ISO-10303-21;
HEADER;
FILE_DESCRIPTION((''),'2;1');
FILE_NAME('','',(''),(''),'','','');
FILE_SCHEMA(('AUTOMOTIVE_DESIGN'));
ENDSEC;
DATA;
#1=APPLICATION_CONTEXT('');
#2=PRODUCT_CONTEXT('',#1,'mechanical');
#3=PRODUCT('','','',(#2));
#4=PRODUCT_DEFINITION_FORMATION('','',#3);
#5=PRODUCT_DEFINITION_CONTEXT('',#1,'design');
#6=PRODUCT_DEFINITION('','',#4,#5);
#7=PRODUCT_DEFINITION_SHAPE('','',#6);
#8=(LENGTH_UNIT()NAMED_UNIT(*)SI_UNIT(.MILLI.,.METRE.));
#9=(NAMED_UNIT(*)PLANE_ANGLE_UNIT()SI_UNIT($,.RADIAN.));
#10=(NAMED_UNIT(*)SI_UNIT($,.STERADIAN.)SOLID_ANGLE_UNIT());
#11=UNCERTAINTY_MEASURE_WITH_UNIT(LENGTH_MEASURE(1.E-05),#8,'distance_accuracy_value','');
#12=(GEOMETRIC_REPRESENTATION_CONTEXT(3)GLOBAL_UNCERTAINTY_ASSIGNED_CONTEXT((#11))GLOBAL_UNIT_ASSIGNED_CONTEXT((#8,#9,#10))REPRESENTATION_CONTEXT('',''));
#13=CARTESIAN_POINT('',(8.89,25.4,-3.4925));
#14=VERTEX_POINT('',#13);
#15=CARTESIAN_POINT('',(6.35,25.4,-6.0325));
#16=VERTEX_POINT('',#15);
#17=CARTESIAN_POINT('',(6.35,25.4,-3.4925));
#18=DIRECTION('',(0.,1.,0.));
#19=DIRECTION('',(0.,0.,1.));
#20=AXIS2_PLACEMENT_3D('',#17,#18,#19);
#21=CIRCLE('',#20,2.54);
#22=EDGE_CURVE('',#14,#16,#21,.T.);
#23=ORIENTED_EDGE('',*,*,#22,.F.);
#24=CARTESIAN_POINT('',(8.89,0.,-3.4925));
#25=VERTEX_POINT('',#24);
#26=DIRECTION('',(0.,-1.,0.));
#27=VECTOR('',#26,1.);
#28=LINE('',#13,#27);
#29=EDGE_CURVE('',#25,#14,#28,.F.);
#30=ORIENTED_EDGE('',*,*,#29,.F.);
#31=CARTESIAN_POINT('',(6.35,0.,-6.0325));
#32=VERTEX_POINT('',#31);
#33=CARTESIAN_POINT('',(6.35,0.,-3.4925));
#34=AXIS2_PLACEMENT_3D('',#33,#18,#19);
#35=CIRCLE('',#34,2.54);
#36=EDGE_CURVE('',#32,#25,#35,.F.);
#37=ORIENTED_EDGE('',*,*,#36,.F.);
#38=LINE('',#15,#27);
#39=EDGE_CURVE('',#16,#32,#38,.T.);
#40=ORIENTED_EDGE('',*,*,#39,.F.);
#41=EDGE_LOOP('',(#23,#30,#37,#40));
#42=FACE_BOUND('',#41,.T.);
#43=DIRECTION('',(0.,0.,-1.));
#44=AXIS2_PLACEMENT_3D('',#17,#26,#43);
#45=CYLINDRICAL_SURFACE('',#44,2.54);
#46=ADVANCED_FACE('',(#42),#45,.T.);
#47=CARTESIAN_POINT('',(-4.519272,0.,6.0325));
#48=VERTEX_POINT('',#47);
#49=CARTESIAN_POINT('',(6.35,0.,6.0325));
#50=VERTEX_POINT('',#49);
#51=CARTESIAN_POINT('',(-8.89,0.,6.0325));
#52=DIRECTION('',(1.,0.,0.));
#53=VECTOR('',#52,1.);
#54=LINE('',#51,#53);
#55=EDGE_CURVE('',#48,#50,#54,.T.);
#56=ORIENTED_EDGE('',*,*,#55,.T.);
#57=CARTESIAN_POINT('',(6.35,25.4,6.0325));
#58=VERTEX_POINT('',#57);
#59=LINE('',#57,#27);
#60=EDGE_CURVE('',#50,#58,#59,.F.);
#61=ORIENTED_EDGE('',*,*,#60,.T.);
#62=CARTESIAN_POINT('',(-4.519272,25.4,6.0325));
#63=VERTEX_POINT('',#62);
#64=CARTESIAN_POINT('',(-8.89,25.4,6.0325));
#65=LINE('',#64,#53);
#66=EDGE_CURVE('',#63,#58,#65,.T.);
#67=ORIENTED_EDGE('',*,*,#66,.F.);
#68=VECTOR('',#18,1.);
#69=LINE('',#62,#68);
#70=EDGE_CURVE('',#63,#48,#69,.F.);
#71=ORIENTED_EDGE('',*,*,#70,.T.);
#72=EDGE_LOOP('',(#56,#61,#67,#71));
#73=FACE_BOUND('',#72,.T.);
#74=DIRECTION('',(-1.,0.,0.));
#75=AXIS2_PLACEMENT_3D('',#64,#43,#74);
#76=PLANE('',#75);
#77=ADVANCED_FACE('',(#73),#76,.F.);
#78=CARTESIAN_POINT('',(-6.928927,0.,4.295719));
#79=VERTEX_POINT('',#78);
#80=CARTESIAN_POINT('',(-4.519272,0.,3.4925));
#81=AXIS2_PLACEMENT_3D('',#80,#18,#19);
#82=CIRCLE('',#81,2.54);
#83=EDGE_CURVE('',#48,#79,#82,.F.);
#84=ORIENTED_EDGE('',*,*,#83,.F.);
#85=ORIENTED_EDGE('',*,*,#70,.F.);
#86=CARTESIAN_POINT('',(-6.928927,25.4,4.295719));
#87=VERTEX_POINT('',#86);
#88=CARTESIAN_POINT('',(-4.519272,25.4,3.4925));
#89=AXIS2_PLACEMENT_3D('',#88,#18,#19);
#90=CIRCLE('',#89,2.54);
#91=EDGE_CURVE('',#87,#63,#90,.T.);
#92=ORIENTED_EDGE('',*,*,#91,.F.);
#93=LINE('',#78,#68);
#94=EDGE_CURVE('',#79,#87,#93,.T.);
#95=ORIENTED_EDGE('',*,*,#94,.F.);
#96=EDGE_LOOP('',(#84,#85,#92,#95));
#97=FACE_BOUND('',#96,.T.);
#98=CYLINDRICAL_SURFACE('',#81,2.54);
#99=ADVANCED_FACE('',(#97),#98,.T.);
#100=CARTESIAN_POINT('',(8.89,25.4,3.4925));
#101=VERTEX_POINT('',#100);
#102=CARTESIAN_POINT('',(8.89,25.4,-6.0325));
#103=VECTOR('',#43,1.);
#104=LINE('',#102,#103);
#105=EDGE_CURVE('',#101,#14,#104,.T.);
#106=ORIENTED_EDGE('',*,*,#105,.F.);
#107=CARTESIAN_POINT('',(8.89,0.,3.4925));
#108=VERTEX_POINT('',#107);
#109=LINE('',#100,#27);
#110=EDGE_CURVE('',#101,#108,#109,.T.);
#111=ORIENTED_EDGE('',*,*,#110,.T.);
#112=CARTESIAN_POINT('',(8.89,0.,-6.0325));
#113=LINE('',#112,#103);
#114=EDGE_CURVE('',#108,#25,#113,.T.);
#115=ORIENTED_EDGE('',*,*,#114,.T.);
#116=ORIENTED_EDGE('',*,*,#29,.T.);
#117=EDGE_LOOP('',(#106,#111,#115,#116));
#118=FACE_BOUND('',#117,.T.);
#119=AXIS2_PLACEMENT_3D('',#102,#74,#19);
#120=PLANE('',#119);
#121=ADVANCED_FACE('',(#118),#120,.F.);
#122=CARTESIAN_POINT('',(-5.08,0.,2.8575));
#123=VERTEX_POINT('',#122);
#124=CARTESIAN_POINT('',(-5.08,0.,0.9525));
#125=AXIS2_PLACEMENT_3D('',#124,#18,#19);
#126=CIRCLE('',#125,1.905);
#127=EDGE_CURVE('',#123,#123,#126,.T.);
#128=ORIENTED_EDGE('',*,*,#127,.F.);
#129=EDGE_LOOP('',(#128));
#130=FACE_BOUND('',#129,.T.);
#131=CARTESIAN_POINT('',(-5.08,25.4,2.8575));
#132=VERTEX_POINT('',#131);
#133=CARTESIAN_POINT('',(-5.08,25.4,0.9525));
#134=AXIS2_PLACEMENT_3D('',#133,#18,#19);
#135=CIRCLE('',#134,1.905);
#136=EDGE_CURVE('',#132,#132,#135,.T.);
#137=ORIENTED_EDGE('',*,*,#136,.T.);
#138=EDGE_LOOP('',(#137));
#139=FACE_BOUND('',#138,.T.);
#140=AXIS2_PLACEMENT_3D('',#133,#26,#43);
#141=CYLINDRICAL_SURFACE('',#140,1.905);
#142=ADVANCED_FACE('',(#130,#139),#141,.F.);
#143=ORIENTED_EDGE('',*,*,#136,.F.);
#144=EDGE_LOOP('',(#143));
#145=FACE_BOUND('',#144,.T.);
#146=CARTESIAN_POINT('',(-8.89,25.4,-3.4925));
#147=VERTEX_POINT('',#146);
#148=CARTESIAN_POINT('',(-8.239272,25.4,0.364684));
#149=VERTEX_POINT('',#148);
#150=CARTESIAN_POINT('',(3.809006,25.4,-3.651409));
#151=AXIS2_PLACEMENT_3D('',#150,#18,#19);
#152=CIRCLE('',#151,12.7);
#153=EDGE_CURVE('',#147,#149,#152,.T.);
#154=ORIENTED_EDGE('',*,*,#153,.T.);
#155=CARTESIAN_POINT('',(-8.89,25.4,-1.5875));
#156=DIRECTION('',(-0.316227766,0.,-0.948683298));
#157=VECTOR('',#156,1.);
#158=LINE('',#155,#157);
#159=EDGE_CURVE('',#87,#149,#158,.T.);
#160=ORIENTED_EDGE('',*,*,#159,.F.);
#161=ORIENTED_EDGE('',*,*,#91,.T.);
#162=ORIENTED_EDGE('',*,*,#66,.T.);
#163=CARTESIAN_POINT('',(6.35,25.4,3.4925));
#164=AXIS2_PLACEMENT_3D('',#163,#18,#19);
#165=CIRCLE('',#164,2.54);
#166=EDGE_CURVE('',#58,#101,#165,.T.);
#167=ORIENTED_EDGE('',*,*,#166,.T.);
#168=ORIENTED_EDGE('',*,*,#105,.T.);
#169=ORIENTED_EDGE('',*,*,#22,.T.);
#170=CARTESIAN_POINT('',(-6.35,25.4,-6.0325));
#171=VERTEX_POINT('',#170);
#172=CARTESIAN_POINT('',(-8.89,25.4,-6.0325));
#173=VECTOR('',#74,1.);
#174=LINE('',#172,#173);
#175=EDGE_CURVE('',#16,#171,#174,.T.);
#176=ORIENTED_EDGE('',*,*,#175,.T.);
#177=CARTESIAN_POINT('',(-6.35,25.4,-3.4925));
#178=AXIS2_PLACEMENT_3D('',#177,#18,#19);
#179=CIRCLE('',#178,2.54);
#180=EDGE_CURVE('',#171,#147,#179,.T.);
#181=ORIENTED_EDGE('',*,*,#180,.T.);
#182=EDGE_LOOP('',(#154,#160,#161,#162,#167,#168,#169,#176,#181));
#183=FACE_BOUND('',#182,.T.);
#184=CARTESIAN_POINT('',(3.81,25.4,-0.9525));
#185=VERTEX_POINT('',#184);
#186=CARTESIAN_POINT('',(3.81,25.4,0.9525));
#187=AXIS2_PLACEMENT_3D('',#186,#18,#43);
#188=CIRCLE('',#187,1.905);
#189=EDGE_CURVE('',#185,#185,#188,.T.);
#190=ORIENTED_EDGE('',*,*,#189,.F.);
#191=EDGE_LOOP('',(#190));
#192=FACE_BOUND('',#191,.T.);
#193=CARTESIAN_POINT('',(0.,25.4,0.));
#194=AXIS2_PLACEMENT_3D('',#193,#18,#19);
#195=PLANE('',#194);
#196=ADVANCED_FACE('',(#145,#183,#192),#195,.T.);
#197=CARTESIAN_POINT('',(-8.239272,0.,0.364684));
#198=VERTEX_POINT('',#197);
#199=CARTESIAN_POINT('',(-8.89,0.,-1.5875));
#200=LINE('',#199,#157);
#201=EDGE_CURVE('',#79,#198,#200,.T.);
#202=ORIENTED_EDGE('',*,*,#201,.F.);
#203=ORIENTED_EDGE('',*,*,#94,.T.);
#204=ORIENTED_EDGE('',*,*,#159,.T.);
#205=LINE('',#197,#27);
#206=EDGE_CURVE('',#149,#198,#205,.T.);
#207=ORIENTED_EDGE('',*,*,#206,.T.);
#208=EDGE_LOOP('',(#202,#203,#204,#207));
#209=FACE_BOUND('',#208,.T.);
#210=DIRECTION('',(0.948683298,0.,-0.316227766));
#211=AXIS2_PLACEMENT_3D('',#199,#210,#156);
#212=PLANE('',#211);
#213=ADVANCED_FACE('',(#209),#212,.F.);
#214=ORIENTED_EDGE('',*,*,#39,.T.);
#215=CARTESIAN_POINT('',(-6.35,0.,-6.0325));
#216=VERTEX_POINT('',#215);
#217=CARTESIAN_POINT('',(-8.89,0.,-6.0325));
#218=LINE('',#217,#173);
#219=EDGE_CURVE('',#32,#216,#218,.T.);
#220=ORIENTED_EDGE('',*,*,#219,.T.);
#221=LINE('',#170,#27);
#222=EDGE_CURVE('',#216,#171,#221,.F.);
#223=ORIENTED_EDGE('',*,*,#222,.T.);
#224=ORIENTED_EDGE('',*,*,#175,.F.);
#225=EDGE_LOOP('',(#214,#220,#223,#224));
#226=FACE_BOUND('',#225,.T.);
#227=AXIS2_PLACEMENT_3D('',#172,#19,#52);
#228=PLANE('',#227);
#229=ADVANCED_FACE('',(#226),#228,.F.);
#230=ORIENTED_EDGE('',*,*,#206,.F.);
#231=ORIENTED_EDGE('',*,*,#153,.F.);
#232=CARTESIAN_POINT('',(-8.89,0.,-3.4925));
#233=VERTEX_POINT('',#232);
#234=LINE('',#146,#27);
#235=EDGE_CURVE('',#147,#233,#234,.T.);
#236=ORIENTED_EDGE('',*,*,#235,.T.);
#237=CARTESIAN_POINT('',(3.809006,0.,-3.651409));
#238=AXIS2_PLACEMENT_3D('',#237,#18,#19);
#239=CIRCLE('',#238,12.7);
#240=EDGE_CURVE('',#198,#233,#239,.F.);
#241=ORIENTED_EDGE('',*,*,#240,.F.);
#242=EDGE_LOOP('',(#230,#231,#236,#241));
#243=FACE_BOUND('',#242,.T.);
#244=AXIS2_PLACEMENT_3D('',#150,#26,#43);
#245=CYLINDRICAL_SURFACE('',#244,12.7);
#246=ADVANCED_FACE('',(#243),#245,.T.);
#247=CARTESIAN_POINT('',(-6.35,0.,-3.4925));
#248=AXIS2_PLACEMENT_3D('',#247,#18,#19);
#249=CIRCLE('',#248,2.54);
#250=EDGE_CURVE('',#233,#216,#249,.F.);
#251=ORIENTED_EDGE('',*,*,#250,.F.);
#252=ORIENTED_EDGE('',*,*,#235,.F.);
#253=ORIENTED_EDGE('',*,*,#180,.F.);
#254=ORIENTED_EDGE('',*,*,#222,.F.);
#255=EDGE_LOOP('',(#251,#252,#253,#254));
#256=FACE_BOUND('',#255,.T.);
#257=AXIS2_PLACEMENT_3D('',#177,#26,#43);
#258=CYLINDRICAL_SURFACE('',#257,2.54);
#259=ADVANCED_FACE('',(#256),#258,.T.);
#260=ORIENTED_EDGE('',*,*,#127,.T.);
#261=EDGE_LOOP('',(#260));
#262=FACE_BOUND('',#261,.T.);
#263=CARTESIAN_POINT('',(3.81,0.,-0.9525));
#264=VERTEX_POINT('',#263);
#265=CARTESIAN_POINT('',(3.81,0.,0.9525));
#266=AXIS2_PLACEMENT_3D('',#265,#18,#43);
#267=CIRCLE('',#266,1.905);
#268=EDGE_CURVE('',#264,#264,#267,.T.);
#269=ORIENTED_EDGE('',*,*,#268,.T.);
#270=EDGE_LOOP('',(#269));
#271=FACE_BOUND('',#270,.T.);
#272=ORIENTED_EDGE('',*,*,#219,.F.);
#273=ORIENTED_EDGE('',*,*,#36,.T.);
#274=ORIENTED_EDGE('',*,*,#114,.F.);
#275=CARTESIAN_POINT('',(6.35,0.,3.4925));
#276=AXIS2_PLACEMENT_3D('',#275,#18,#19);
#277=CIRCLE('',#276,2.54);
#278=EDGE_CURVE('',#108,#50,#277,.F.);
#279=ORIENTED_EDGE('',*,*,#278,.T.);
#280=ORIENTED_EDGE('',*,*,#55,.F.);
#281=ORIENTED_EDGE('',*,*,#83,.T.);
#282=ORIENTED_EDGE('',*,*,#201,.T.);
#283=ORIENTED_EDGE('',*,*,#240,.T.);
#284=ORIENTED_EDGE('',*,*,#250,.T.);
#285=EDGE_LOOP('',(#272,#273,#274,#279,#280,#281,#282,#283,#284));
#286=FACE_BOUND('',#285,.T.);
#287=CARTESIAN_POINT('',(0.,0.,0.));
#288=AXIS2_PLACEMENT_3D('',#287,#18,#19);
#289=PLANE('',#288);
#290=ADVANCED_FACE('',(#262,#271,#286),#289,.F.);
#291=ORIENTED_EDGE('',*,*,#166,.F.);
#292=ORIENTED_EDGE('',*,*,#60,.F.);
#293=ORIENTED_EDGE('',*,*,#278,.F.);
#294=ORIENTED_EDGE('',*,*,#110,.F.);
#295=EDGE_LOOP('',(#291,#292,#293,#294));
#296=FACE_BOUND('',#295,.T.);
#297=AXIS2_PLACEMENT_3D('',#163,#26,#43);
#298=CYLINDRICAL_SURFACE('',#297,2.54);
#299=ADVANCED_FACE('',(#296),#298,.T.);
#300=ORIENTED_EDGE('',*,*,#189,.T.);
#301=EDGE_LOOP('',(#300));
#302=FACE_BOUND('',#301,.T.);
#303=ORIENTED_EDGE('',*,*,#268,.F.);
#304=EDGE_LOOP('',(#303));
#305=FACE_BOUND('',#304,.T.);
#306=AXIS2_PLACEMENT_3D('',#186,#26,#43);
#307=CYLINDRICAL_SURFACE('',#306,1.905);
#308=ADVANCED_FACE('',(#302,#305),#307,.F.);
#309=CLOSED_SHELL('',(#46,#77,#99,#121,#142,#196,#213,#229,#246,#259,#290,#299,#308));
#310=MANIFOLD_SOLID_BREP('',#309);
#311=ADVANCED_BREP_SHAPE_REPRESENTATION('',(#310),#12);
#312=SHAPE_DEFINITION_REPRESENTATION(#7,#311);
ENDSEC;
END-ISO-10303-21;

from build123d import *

# Parameters (mm, degrees)
SKETCH1_W           = 17.78
SKETCH1_H           = 12.065
SKETCH1_R           = 1.905
BOSS_EXTRUDE1_DEPTH = 25.4
CUT_EXTRUDE1_DEPTH  = 28.578672126
FILLET1_R           = 2.54
FILLET2_R           = 12.7


with BuildPart() as part:
    # Sketch1 → Boss-Extrude1 (new body)
    with BuildSketch(Plane(origin=(0, 0, 0), x_dir=(1, 0, 0), z_dir=(0, 1, 0))):
        Rectangle(SKETCH1_W, SKETCH1_H)
        with Locations(Location((-5.08, -0.9525, 0), (0, 0, 270))):
            Circle(SKETCH1_R, mode=Mode.SUBTRACT)
        with Locations(Location((3.81, -0.9525, 0), (0, 0, 90))):
            Circle(SKETCH1_R, mode=Mode.SUBTRACT)
    extrude(amount=BOSS_EXTRUDE1_DEPTH)

    # Sketch2 → Cut-Extrude1 (cut, through all)
    with BuildSketch(Plane(origin=(0, 25.4, 0), x_dir=(1, 0, 0), z_dir=(0, 1, 0))):
        Polygon((-8.89, 1.5875), (-6.35, -6.0325), (-8.89, -6.0325), align=None)
    extrude(amount=-CUT_EXTRUDE1_DEPTH, mode=Mode.SUBTRACT)

    # Fillet1
    fillet1_edges = [part.edges().sort_by_distance(p)[0] for p in [
        (-6.35, 12.7, 6.0325),
        (8.89, 12.7, 6.0325),
        (-8.89, 12.7, -6.0325),
        (8.89, 12.7, -6.0325),
    ]]
    fillet(fillet1_edges, radius=FILLET1_R)

    # Fillet2
    # the kernel refuses this fillet: 12.7 mm, written as the material it takes off along each edge
    with BuildSketch(Plane(origin=(-8.89, 30.542393541, -1.5875), x_dir=(0.00016823247484796397, 0, -0.9999999858489171), z_dir=(0, -1, 0))) as fillet2_piece_1:
        with BuildLine():
            CenterArc((2.066827795, 12.698397406), FILLET2_R, 251.555412166, 17.534355835)
            Line((-1.951291688, 0.650795328), (-2.353103637, -0.553964879))
            Line((-2.353103637, -0.553964879), (-0.401811948, -1.204760208))
            Line((-0.401811948, -1.204760208), (-0.000213655, -1.269999982))
            ThreePointArc((-0.000213655, -1.269999982), (1.904786318, -1.270320465), (1.844902092, -1.269839741))
            Line((1.844902092, -1.269839741), (1.865077156, 0))
        make_face()
    extrude(amount=35.684787082, mode=Mode.SUBTRACT)


solid = part.part
